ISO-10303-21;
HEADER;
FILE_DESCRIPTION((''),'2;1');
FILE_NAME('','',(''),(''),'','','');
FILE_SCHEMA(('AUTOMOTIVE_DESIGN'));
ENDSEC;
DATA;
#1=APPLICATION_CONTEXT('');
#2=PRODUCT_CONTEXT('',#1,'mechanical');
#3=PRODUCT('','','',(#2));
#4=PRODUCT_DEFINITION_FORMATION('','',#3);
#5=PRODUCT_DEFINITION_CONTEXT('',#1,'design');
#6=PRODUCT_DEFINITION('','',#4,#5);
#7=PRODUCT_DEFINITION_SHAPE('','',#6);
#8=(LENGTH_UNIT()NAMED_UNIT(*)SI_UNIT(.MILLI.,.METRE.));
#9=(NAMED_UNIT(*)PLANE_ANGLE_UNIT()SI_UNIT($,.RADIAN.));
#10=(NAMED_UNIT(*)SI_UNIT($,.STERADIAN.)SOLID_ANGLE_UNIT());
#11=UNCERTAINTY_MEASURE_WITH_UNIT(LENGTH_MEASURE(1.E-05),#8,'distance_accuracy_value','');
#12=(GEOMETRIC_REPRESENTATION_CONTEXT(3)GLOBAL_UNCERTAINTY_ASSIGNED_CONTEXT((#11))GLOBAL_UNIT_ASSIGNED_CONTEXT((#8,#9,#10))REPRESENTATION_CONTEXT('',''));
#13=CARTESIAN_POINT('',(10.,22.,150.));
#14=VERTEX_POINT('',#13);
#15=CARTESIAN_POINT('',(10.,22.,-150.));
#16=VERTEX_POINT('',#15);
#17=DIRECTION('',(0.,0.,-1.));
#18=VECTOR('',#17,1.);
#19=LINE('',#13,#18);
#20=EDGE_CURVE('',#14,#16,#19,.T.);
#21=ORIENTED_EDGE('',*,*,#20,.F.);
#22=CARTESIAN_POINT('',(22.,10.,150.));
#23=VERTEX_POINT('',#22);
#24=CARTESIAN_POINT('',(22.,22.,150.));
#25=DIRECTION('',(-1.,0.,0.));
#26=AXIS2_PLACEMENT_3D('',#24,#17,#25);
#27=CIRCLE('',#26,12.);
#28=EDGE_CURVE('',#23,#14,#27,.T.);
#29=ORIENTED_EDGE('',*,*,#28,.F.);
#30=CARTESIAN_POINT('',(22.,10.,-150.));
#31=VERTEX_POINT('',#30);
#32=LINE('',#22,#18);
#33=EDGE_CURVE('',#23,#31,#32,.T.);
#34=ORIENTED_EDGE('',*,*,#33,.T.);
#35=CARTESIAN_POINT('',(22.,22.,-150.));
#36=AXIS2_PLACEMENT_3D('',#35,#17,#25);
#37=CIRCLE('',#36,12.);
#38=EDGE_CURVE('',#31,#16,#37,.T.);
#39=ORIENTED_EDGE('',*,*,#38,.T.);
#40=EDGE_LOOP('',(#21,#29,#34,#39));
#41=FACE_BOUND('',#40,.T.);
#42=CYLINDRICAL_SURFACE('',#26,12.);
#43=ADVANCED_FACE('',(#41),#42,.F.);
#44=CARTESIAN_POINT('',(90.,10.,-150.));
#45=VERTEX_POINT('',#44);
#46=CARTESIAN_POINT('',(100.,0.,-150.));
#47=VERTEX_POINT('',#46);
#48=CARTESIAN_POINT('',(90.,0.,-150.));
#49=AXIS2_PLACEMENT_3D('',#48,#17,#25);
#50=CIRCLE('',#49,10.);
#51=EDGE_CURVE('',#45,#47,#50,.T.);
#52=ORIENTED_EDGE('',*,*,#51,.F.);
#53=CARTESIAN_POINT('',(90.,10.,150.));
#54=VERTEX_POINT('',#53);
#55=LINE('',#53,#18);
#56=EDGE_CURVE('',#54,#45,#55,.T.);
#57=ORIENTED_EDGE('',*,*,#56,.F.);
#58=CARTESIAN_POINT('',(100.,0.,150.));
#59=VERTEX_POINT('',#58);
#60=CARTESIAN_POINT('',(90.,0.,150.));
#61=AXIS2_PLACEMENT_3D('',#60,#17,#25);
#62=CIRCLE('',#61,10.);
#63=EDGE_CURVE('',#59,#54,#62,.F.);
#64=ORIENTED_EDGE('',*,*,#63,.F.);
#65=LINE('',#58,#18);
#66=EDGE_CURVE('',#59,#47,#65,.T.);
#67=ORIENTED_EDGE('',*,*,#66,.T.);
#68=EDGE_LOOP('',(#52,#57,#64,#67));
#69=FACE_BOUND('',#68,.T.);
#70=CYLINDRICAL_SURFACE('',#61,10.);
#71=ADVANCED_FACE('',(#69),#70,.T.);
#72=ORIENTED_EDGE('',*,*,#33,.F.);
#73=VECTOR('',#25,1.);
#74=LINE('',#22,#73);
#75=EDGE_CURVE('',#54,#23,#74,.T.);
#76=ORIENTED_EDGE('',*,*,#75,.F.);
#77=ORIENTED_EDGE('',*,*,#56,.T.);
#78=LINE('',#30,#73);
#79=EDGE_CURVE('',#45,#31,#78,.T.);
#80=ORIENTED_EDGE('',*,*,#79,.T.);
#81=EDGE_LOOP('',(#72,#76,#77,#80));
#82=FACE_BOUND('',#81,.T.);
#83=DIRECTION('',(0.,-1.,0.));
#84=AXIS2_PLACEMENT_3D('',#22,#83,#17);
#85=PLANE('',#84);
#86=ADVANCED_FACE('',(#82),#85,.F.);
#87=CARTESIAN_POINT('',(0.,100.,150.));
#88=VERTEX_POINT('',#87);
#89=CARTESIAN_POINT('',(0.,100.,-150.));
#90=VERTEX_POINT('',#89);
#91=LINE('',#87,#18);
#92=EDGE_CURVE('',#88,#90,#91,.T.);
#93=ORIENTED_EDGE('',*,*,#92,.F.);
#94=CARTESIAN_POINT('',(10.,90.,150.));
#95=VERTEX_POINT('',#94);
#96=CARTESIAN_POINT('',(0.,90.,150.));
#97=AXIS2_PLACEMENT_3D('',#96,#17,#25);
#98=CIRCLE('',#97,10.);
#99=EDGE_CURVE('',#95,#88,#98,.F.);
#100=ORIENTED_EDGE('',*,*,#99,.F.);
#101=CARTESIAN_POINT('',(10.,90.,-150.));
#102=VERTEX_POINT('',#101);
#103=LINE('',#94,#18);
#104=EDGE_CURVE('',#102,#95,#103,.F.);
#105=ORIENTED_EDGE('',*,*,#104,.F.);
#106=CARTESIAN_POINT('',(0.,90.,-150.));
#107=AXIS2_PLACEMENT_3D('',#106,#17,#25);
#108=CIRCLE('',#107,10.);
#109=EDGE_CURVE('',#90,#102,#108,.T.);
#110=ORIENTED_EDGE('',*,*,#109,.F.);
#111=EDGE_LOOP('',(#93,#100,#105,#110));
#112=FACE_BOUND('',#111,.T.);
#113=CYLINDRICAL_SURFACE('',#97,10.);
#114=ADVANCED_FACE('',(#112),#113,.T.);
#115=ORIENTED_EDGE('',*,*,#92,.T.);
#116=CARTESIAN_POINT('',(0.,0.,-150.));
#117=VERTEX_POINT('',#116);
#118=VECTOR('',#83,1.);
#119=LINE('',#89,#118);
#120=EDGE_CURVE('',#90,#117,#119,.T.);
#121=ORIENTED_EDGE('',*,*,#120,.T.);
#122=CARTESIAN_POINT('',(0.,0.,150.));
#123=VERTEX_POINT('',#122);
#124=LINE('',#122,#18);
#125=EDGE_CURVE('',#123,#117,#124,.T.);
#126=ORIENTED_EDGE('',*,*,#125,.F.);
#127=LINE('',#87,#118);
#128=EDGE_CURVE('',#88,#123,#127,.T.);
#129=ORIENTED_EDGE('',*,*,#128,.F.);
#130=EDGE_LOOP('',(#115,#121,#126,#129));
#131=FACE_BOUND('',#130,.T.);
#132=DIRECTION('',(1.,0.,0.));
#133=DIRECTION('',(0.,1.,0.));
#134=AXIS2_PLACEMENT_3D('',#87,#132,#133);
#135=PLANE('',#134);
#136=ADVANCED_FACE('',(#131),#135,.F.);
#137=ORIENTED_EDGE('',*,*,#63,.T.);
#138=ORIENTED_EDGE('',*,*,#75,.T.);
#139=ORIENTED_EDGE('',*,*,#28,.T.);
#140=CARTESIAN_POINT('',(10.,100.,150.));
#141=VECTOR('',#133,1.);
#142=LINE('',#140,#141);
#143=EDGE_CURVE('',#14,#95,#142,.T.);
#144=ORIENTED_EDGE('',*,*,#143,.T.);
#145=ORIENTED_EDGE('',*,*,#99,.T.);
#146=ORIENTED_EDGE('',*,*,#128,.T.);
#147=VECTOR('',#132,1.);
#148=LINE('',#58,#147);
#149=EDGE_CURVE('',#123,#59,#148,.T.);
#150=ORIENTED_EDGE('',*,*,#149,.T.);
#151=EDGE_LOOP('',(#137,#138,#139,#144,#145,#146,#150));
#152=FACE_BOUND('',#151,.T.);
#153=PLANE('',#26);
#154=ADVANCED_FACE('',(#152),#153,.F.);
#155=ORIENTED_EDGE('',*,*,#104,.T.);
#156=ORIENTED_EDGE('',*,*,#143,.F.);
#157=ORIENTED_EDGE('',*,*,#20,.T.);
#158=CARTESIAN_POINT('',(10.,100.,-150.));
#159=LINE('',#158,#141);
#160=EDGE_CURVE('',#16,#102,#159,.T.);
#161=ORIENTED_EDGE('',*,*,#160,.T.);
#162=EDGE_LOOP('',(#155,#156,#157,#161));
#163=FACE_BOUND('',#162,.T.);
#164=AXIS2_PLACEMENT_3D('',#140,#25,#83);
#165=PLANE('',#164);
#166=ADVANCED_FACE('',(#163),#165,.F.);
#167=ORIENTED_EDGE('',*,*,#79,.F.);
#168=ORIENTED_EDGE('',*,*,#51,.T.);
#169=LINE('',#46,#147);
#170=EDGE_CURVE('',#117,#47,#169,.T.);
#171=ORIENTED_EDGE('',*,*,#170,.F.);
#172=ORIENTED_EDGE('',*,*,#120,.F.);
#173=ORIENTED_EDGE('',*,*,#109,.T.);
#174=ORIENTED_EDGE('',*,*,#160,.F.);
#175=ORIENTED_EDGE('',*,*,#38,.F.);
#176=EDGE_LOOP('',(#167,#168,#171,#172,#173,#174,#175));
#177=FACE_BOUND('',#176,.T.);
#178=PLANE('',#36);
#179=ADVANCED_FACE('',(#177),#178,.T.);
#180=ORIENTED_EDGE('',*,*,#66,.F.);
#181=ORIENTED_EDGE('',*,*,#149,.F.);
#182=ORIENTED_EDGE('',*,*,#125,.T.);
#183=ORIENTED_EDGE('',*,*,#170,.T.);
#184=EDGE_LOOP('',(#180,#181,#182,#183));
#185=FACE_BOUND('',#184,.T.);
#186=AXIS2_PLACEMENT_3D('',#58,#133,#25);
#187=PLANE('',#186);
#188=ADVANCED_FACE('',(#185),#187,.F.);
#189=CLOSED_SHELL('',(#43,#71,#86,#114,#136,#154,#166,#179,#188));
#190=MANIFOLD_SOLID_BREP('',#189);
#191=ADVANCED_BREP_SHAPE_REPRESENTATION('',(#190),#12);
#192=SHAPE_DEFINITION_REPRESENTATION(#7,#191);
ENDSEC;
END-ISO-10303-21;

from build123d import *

# Parameters (mm, degrees)
BASESTEELANGLE_DEPTH = 150
TOEFILLET_R          = 10


with BuildPart() as part:
    # Sketch1 → BaseSteelAngle (new, symmetric)
    with BuildSketch(Plane.XY):
        with BuildLine():
            Line((0, 100), (0, 0))
            Line((0, 0), (100, 0))
            Line((100, 0), (100, 10))
            Line((100, 10), (22, 10))
            ThreePointArc((22, 10), (13.514718626, 13.514718626), (10, 22))
            Line((10, 22), (10, 100))
            Line((10, 100), (0, 100))
        make_face()
    extrude(amount=BASESTEELANGLE_DEPTH, both=True)

    # ToeFillet
    toefillet_edges = [part.edges().sort_by_distance(p)[0] for p in [
        (10, 100, 0),
        (100, 10, 0),
    ]]
    fillet(toefillet_edges, radius=TOEFILLET_R - 0.0001)  # a hair under: the kernel refuses the full size


solid = part.part
